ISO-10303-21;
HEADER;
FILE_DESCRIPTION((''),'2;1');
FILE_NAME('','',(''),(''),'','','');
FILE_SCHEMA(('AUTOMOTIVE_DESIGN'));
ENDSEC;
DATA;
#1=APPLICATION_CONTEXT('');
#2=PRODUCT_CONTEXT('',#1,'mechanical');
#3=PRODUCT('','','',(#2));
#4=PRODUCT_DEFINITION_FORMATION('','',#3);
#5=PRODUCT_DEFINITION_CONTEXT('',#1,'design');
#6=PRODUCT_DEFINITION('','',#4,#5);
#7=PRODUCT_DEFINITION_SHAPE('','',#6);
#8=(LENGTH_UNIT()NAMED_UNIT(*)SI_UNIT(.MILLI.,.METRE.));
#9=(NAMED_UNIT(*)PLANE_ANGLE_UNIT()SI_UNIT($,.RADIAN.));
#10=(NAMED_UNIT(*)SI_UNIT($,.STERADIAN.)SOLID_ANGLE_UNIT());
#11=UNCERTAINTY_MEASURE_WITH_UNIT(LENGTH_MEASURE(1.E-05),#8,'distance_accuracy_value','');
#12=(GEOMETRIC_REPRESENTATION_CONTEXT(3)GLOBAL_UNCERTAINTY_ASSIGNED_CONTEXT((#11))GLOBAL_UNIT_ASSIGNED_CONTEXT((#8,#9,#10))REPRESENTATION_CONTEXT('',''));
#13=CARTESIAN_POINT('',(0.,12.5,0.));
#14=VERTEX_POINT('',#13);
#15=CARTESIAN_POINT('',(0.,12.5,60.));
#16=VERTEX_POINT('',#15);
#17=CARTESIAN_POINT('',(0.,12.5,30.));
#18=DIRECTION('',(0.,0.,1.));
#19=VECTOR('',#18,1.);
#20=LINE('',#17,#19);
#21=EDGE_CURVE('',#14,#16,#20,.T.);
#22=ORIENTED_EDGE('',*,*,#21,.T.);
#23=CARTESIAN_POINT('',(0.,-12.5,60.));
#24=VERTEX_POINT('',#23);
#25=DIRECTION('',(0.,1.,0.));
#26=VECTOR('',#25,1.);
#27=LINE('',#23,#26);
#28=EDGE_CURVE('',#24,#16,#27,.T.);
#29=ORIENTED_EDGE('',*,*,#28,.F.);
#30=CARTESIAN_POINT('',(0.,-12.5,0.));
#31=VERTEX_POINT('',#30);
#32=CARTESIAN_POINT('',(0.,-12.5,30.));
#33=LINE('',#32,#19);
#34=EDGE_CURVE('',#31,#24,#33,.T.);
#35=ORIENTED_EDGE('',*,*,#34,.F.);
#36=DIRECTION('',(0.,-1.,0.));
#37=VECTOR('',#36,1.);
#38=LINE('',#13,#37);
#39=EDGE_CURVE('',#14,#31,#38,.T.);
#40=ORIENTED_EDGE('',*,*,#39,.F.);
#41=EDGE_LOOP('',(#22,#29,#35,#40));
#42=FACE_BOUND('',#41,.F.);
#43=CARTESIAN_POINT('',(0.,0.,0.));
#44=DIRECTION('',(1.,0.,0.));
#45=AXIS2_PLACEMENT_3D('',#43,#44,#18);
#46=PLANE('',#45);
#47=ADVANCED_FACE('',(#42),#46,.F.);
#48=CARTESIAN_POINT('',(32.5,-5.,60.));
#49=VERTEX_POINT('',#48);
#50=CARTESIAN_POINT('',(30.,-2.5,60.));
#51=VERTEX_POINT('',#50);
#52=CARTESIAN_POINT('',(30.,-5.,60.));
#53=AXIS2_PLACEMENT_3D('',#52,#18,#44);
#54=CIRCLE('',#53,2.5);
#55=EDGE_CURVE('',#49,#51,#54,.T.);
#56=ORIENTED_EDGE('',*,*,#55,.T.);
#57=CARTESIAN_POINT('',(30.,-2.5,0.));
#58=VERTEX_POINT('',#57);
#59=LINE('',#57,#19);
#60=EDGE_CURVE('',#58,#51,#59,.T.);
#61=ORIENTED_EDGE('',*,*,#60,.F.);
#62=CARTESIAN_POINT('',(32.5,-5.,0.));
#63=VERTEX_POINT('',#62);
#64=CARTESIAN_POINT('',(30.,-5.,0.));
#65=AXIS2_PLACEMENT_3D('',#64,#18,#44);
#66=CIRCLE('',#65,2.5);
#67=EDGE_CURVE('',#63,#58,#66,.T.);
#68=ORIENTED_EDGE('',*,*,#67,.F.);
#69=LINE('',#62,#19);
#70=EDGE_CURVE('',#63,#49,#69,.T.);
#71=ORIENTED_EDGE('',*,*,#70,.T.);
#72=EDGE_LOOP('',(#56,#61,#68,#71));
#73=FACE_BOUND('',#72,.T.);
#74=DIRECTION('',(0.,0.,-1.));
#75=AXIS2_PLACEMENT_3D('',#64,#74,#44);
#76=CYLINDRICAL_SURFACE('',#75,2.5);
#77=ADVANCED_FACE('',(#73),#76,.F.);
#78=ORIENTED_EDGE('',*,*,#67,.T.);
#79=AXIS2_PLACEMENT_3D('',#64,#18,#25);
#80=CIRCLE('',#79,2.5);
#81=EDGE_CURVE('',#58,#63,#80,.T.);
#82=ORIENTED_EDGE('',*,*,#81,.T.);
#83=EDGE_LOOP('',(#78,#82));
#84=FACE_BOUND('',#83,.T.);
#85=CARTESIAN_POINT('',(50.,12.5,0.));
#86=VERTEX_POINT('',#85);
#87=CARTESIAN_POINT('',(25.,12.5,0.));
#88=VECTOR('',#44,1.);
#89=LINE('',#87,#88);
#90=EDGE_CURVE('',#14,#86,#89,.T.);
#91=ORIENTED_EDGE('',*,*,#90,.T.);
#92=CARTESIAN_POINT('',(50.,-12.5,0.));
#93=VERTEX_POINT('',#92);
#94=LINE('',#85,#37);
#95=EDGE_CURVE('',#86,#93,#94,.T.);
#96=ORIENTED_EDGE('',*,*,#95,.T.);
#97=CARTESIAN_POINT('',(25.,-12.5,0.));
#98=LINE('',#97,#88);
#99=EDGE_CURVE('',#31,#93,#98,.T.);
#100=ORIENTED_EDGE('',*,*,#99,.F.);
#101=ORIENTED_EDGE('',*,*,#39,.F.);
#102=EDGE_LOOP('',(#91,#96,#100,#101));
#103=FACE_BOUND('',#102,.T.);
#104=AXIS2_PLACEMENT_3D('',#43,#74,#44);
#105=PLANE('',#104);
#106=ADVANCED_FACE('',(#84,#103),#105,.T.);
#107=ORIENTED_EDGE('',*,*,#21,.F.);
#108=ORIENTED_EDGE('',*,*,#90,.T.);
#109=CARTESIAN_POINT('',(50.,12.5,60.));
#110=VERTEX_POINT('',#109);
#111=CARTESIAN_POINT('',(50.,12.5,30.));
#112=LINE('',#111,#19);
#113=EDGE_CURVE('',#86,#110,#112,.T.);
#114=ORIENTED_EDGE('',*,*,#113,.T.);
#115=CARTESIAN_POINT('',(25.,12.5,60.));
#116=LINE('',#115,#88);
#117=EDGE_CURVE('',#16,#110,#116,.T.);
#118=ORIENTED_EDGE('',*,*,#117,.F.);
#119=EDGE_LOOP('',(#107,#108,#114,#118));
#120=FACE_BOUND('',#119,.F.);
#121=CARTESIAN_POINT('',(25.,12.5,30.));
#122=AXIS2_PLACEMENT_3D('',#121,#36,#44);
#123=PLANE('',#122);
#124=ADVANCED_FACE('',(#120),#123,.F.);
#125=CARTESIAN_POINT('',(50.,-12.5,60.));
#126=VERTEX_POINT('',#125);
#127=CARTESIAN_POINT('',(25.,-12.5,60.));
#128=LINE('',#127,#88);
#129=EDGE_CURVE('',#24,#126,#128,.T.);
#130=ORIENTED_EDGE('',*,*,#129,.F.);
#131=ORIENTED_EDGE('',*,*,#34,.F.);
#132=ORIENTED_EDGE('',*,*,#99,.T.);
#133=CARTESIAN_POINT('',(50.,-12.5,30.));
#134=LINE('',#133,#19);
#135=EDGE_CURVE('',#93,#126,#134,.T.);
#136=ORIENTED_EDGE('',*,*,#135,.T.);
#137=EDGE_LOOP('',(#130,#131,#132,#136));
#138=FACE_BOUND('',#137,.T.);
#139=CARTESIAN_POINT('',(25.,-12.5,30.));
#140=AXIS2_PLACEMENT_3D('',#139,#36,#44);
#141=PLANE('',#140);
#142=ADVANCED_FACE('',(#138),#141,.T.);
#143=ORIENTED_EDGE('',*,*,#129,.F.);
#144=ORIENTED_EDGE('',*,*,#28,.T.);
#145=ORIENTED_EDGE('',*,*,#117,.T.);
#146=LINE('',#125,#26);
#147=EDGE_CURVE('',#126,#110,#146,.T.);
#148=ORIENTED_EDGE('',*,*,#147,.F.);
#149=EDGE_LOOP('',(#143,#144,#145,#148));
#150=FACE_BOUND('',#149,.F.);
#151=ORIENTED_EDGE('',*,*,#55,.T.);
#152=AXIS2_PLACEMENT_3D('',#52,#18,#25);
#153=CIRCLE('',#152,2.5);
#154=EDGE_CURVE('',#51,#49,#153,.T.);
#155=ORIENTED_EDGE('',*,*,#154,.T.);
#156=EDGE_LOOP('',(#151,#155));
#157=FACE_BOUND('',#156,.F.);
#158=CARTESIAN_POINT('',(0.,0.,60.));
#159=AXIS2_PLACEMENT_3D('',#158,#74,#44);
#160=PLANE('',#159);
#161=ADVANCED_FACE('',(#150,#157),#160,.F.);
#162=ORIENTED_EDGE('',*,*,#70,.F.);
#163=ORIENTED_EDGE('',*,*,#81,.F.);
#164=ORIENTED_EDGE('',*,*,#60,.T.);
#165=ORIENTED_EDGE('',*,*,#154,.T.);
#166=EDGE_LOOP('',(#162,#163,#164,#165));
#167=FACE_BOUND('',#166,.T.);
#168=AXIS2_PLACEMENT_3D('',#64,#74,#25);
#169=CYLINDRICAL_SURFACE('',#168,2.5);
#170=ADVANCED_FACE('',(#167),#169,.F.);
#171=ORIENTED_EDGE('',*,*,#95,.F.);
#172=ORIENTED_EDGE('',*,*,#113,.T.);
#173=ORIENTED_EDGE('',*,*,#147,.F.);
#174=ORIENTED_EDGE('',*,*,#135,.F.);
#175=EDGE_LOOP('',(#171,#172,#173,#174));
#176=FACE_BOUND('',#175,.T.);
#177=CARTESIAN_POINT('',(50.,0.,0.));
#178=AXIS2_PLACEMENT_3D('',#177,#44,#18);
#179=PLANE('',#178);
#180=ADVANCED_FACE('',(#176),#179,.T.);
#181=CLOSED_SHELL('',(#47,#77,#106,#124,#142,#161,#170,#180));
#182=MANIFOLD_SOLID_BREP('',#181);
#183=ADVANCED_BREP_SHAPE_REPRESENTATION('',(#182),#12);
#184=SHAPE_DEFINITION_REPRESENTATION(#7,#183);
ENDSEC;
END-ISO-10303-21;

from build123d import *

# Parameters (mm, degrees)
F0_W     = 50
F0_H     = 60
F1_DEPTH = 12.5
F3_DEPTH = 12.5
F5_DEPTH = 60


# Not quite as in the source:
# - a feature names something its author has since deleted; it is built from what else it names


with BuildPart() as f1:
    # F0 (on Front) → F1 (new body, symmetric)
    with BuildSketch(Plane.XZ):
        with Locations((25, 30)):
            Rectangle(F0_W, F0_H)
    extrude(amount=F1_DEPTH, both=True)

    # F2 (on Right) → F3 (cut, symmetric)
    with BuildSketch(Plane.YZ):
        Polygon((-12.1228452772, 60.4202598333), (0, 60.6142282486), (0, 70.6142282486), align=None)
    extrude(amount=F3_DEPTH, both=True, mode=Mode.SUBTRACT)

    # F4 (on Top) → F5 (cut, through all)
    with BuildSketch(Plane.XY):
        with BuildLine():
            ThreePointArc((30, -2.5), (28.232233047, -6.767766953), (32.5, -5))
            ThreePointArc((32.5, -5), (31.767766953, -3.232233047), (30, -2.5))
        make_face()
    extrude(amount=F5_DEPTH, mode=Mode.SUBTRACT)


solid = f1.part
